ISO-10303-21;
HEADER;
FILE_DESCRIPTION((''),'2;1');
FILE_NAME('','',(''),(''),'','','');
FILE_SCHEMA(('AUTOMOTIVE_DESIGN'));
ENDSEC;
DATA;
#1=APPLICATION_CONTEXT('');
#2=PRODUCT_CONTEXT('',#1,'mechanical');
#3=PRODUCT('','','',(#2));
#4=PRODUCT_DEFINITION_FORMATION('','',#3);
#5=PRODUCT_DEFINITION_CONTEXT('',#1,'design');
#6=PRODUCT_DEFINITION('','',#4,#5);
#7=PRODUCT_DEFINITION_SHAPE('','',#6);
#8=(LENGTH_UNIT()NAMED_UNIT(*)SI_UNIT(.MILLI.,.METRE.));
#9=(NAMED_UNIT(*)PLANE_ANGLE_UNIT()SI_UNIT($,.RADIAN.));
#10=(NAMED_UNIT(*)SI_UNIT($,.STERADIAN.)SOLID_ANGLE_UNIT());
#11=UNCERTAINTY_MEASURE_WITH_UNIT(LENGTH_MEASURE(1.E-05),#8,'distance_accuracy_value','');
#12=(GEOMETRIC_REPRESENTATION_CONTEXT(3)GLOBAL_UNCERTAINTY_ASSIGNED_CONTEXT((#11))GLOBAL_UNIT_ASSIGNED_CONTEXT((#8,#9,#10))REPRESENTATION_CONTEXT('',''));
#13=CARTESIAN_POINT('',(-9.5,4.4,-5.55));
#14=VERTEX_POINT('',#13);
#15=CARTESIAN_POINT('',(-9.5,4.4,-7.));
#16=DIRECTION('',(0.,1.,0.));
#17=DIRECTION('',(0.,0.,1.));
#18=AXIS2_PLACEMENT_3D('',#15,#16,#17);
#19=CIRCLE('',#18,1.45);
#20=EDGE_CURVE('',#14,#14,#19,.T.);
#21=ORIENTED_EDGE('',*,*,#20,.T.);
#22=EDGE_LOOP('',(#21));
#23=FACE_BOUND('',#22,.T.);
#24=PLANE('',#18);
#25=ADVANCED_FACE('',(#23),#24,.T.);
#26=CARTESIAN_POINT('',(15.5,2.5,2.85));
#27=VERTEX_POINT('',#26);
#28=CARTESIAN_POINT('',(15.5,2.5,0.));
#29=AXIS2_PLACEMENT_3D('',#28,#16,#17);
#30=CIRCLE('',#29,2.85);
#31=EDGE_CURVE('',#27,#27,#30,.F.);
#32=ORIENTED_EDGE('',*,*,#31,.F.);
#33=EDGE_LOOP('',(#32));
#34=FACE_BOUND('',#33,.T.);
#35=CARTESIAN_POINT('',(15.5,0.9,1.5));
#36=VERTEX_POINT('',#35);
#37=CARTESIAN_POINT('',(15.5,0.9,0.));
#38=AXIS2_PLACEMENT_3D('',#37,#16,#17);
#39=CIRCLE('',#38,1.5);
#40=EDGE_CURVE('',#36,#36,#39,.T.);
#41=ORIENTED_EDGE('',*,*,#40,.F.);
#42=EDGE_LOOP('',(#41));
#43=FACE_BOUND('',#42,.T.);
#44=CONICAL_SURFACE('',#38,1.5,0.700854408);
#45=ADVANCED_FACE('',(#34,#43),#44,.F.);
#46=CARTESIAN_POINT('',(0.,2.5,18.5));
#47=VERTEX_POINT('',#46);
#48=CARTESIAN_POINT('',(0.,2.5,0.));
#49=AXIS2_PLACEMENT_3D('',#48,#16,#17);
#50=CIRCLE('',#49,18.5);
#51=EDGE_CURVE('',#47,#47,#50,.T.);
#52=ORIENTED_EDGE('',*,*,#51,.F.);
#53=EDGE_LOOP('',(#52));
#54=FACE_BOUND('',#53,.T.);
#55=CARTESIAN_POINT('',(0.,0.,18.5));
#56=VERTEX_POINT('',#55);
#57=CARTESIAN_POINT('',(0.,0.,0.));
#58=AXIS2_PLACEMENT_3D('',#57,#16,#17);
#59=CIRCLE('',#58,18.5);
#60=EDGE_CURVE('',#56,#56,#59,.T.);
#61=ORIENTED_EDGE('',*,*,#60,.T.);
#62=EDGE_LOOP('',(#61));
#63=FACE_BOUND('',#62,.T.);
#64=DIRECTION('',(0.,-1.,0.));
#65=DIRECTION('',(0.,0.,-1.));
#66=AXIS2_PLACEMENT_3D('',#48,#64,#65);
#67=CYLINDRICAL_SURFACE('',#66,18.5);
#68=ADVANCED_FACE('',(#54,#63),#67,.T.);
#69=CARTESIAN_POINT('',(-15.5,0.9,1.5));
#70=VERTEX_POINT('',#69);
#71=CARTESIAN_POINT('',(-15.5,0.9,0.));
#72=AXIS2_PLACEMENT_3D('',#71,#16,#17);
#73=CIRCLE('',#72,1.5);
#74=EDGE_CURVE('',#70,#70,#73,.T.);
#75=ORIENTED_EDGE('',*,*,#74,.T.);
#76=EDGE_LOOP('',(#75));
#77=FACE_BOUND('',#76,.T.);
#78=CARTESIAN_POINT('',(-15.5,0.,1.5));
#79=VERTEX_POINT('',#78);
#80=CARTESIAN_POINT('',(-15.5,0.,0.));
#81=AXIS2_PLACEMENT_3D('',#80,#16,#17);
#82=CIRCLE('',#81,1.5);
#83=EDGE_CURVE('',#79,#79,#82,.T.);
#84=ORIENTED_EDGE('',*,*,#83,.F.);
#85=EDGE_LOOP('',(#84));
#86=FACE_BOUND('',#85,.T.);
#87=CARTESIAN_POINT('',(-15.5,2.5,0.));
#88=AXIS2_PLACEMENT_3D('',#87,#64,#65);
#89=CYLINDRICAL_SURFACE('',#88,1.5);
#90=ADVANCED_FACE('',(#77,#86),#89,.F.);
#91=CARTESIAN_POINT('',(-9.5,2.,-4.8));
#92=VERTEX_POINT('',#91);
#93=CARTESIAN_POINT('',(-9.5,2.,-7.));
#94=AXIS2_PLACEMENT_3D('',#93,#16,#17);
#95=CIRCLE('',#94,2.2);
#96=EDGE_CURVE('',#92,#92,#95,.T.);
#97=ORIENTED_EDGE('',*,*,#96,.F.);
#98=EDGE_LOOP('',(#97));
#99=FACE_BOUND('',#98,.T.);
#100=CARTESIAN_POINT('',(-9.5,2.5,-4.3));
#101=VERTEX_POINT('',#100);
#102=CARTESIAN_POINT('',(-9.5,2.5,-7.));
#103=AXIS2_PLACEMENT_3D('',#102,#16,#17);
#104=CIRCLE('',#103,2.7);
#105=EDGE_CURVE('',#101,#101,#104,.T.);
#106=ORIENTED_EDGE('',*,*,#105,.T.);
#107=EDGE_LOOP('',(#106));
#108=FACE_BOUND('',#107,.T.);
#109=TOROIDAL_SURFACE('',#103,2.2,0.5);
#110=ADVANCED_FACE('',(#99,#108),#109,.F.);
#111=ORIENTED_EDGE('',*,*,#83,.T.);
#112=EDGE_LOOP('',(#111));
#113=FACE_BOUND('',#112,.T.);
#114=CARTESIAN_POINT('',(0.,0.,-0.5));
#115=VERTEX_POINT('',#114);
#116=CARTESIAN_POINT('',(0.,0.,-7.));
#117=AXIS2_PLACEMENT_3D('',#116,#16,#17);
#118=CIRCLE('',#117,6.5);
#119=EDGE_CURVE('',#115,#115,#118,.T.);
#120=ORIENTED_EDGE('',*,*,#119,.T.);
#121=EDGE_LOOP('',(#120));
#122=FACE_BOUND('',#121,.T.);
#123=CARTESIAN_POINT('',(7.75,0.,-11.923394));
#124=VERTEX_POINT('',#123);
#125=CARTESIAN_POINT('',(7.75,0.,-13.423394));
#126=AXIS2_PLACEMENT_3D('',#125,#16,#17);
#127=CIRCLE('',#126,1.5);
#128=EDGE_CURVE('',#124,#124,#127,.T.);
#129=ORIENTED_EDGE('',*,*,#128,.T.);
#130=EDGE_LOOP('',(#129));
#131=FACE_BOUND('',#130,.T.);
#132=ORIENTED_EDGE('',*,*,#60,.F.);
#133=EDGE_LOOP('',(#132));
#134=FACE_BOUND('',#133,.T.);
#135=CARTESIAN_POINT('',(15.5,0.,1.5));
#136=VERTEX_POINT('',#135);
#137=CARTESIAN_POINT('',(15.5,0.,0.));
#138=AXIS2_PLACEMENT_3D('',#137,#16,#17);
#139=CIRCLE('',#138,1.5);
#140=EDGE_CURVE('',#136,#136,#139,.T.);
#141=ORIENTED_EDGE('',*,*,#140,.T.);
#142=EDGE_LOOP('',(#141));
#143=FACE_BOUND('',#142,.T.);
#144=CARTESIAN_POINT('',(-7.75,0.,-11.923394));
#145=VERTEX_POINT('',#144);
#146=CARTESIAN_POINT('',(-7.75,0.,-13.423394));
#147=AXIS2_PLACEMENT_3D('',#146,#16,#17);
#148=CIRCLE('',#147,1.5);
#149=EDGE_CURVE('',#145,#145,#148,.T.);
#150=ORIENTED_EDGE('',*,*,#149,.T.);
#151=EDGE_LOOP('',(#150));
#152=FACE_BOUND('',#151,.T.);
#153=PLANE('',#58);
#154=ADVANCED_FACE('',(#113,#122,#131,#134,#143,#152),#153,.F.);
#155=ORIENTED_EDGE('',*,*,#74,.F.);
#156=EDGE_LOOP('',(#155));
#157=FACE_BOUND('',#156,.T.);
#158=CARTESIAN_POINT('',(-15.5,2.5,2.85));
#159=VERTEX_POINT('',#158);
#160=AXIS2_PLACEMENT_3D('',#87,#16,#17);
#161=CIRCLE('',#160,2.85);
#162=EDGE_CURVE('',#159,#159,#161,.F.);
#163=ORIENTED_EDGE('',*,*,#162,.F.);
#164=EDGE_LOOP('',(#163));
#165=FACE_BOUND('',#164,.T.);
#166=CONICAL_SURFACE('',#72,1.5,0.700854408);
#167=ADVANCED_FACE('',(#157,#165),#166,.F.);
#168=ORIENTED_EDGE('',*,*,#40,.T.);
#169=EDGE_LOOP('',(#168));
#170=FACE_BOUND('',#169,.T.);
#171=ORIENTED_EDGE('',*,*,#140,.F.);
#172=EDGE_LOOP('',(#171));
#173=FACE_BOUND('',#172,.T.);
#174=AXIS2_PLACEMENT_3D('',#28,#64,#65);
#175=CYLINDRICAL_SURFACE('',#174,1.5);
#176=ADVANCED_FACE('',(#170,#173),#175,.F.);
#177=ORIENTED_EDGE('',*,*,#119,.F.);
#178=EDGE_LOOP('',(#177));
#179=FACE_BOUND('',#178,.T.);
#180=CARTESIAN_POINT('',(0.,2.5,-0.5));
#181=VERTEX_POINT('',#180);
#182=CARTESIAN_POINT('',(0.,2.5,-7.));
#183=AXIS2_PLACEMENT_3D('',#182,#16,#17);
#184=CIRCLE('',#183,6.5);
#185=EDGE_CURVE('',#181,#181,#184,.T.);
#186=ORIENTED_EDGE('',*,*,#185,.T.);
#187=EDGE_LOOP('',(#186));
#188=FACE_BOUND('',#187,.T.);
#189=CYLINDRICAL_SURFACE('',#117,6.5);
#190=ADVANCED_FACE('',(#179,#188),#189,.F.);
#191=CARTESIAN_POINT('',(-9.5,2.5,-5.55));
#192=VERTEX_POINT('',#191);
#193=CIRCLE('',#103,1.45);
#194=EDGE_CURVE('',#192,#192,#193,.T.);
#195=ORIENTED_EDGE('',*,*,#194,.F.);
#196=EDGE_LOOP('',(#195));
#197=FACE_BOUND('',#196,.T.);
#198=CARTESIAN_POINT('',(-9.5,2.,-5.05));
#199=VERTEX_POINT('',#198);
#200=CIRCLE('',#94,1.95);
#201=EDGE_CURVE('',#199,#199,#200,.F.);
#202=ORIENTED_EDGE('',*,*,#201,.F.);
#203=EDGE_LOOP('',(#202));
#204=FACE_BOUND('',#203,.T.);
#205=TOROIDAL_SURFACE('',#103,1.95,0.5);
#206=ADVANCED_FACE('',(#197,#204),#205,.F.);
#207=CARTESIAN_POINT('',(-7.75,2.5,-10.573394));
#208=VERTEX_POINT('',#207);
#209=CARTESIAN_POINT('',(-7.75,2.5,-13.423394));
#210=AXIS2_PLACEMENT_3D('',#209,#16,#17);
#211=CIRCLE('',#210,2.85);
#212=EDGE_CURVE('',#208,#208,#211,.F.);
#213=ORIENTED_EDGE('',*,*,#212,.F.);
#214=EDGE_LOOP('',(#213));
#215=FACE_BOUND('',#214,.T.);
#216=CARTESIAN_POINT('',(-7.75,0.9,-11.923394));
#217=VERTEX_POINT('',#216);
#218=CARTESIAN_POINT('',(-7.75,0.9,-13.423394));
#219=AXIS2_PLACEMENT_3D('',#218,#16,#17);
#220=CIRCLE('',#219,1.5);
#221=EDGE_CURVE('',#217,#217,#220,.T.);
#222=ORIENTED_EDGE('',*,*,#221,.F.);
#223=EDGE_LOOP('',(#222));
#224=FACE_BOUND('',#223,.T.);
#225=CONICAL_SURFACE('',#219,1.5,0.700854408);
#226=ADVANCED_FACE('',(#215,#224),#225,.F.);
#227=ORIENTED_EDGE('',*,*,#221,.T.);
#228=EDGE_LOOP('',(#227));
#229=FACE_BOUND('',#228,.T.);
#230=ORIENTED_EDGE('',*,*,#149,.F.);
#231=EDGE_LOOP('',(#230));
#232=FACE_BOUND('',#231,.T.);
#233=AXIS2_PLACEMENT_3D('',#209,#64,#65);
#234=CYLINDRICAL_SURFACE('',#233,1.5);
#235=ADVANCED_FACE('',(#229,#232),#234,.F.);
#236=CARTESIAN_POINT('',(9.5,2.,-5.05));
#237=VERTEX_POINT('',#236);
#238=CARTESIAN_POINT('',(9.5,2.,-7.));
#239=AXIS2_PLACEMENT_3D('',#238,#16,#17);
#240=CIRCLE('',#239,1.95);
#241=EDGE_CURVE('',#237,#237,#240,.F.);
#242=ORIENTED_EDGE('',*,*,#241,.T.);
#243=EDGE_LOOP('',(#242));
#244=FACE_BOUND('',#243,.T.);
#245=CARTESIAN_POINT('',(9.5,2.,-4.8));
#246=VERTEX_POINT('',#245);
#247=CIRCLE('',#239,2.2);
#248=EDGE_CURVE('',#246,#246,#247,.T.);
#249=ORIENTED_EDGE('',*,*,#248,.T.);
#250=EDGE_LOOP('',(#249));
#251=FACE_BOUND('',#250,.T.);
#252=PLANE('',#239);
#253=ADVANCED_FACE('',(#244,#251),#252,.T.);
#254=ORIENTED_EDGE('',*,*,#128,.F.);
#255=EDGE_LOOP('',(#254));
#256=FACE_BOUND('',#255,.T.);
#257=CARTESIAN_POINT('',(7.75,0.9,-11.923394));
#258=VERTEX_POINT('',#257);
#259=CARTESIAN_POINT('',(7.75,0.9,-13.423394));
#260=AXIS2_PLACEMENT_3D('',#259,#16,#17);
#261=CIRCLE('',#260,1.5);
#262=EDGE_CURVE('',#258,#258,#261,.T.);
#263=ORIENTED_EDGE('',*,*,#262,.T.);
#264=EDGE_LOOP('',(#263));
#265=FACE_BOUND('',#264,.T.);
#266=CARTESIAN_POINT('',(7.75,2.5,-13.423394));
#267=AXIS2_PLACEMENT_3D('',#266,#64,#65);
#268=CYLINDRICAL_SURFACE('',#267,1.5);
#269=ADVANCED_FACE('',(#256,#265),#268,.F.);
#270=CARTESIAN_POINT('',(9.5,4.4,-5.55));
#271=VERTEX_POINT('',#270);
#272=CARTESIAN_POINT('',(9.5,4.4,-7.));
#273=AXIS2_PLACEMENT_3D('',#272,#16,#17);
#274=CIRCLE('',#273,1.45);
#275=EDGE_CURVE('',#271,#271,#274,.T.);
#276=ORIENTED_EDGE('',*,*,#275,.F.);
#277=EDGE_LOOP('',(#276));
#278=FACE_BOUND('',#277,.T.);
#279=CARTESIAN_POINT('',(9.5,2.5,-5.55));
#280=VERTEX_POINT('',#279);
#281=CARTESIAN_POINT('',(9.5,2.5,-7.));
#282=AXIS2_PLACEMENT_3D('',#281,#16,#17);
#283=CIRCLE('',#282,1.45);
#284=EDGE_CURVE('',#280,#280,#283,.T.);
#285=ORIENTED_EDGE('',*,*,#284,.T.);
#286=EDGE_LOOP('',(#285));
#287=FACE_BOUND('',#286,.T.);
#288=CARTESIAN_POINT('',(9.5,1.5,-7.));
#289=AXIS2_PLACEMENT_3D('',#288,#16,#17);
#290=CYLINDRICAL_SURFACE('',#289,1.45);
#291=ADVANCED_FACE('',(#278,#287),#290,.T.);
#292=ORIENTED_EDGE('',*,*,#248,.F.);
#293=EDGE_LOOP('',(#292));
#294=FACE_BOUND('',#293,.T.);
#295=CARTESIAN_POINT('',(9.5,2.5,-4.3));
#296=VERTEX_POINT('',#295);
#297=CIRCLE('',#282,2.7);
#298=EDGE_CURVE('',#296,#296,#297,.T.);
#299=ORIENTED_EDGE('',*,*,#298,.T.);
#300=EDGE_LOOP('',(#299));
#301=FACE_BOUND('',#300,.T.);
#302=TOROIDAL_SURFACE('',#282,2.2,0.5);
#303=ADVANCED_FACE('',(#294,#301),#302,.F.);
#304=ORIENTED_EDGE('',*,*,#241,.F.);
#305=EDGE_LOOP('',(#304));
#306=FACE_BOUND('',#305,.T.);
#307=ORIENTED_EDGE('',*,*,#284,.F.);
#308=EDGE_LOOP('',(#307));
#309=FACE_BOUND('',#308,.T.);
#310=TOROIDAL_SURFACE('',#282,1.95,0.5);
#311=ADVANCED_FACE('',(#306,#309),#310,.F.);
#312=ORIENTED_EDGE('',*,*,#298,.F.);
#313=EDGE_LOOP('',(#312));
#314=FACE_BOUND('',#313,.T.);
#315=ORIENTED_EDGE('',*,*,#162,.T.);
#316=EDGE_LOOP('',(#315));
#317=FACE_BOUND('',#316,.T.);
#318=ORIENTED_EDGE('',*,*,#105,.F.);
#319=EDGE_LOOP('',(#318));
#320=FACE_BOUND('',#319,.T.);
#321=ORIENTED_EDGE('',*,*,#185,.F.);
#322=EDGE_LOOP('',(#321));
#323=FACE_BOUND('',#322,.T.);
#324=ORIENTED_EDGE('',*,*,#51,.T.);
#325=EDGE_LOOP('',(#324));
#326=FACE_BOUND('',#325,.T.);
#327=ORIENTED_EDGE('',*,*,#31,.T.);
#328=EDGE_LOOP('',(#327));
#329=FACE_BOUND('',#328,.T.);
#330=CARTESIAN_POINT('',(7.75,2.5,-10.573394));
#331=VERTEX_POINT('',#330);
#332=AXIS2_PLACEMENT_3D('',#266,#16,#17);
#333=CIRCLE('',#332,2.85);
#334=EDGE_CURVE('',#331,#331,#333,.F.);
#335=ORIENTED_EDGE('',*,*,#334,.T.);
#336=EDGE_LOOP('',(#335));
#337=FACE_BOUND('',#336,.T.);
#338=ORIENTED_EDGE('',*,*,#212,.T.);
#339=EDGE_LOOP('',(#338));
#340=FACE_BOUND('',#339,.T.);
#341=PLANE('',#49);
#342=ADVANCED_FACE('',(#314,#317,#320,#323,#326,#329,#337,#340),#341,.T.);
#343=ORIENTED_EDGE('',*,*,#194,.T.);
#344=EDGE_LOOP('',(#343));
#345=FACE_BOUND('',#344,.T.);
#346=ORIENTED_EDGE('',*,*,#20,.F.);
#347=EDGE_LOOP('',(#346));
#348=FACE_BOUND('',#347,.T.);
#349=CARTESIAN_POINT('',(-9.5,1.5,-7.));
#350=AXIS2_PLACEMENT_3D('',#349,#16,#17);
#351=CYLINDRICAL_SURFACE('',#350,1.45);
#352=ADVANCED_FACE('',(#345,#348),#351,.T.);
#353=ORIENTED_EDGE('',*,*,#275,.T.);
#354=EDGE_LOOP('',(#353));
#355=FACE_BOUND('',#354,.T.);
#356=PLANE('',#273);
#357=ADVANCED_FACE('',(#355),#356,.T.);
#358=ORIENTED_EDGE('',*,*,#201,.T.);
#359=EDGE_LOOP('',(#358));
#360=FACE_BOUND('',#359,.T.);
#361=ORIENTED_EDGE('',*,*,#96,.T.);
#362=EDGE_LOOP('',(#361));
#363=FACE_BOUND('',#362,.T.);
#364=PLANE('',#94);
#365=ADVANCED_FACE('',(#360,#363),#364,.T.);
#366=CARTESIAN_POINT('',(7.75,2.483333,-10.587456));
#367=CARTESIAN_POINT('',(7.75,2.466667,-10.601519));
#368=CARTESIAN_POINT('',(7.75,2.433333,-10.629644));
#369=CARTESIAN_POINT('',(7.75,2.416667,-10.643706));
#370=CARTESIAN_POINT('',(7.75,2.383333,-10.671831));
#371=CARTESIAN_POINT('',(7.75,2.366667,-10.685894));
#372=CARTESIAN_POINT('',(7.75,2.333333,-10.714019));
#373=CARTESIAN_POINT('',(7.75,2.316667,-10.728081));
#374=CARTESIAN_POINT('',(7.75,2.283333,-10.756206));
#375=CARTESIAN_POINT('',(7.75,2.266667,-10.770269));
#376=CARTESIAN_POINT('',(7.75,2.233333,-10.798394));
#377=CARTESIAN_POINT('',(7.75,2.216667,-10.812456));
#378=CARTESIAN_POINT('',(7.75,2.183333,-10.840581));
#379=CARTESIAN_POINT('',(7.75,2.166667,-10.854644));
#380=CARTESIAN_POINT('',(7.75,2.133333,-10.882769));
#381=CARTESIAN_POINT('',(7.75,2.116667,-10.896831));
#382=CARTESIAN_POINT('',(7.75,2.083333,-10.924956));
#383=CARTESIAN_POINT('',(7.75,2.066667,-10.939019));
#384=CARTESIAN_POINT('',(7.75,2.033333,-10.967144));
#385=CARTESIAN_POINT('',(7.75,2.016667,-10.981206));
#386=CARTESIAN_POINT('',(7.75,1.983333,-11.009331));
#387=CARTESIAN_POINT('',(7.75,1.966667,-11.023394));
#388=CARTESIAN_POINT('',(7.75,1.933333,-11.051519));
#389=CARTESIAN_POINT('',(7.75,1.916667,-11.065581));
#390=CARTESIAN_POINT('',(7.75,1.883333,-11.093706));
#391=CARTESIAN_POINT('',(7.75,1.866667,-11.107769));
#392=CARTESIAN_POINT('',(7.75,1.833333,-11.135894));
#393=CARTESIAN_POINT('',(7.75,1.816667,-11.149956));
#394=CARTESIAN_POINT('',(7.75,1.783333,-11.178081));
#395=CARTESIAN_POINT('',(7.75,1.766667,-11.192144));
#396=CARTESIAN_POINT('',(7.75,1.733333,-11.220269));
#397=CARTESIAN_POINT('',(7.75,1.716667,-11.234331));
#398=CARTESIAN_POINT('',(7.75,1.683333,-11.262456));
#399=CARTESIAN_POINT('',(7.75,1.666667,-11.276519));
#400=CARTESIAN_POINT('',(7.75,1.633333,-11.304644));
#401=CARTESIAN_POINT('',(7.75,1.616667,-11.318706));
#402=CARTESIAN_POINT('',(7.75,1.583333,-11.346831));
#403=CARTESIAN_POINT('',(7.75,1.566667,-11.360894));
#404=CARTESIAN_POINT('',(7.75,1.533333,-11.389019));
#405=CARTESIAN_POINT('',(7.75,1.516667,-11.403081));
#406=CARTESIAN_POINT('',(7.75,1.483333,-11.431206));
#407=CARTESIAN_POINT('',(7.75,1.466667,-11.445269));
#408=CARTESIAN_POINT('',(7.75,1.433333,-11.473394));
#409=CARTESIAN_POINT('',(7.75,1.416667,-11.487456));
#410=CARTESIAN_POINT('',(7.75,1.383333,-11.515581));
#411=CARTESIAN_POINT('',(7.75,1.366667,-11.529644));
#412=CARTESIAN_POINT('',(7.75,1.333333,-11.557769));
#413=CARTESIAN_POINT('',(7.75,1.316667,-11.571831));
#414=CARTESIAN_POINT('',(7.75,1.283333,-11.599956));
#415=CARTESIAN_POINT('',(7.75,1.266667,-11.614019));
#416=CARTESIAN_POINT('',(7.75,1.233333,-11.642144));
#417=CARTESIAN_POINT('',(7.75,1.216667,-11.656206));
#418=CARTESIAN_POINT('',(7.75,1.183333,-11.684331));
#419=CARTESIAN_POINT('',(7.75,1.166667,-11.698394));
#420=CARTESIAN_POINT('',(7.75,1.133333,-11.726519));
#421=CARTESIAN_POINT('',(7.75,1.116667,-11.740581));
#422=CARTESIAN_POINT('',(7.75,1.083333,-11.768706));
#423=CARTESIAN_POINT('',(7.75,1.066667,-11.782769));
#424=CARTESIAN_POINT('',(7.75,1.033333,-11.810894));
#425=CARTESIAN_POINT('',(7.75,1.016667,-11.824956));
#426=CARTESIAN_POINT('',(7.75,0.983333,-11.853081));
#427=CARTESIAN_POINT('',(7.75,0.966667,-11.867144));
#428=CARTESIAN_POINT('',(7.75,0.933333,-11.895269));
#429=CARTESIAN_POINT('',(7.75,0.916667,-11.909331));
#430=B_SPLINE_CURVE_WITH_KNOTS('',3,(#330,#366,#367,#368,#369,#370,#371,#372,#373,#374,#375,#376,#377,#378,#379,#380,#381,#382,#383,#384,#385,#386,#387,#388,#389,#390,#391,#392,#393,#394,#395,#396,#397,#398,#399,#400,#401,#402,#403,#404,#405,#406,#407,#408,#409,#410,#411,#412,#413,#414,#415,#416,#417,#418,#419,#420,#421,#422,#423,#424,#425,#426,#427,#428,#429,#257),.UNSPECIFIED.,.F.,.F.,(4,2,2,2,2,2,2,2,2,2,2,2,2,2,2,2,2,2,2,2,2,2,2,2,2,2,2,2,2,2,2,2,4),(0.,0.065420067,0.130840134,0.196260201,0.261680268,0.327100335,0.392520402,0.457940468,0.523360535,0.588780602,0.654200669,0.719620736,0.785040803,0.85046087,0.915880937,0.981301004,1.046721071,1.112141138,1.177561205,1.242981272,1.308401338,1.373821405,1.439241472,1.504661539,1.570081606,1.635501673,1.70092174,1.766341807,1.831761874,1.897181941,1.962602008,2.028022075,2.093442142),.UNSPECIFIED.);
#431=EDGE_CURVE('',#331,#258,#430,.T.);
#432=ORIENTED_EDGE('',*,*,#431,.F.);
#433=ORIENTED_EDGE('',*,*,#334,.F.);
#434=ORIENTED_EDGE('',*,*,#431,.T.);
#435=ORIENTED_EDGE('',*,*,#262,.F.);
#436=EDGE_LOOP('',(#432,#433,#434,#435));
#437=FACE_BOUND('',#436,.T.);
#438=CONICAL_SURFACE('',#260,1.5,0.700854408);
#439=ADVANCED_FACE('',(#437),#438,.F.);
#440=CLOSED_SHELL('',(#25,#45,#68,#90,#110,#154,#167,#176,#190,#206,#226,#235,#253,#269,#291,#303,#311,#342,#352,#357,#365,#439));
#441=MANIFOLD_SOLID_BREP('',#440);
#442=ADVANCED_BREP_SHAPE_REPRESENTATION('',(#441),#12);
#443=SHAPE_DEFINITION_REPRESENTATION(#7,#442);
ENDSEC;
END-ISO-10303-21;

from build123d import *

# Parameters (mm, degrees)
SKETCH1_R                = 18.5
SKETCH1_R_2              = 1.5
BOSS_EXTRUDE1_DEPTH      = 2.5
BOSS_EXTRUDE2_DEPTH      = 1.9
BOSS_EXTRUDE2_DEPTH_BACK = 1
SKETCH2_R                = 1.45
CUT_EXTRUDE3_START       = -0.5
SKETCH6_R                = 2.7
SKETCH6_R_2              = 1.45
CUT_EXTRUDE3_DEPTH       = 0.5
SKETCH4_R                = 6.5
CUT_EXTRUDE1_DEPTH       = 27.282123202
CHAMFER1_SIZE            = 1.35
CHAMFER1_SIZE2           = 1.6
FILLET1_R                = 0.5


with BuildPart() as part:
    # Sketch1 → Boss-Extrude1 (new body)
    with BuildSketch(Plane(origin=(0, 0, 0), x_dir=(1, 0, 0), z_dir=(0, 1, 0))):
        with Locations(Location((0, 0, 0), (0, 0, 270))):
            Circle(SKETCH1_R)
        with Locations(Location((-7.75, 13.423393759, 0), (0, 0, 270))):
            Circle(SKETCH1_R_2, mode=Mode.SUBTRACT)
        with Locations(Location((-15.5, 0, 0), (0, 0, 270))):
            Circle(SKETCH1_R_2, mode=Mode.SUBTRACT)
        with Locations(Location((7.75, 13.423393759, 0), (0, 0, 270))):
            Circle(SKETCH1_R_2, mode=Mode.SUBTRACT)
        with Locations(Location((15.5, 0, 0), (0, 0, 270))):
            Circle(SKETCH1_R_2, mode=Mode.SUBTRACT)
    extrude(amount=BOSS_EXTRUDE1_DEPTH)

    # Sketch2 → Boss-Extrude2 (add, two sides: drawn at the far end of the back side and taken through both)
    with BuildSketch(Plane(origin=(0, 2.5, 0), x_dir=(1, 0, 0), z_dir=(0, 1, 0)).offset(-BOSS_EXTRUDE2_DEPTH_BACK)):
        with Locations(Location((-9.5, 7, 0), (0, 0, 270))):
            Circle(SKETCH2_R)
        with Locations(Location((9.5, 7, 0), (0, 0, 270))):
            Circle(SKETCH2_R)
    extrude(amount=BOSS_EXTRUDE2_DEPTH + BOSS_EXTRUDE2_DEPTH_BACK)

    # Sketch6 → Cut-Extrude3 (cut)
    # profile 1 of 2: a face of its own
    with BuildSketch(Plane(origin=(0, 2.5, 0), x_dir=(1, 0, 0), z_dir=(0, 1, 0)).offset(CUT_EXTRUDE3_START)):
        with Locations(Location((-9.5, 7, 0), (0, 0, 270))):
            Circle(SKETCH6_R)
        with Locations(Location((-9.5, 7, 0), (0, 0, 270))):
            Circle(SKETCH6_R_2, mode=Mode.SUBTRACT)
    # profile 2 of 2: a face of its own
    with BuildSketch(Plane(origin=(0, 2.5, 0), x_dir=(1, 0, 0), z_dir=(0, 1, 0)).offset(CUT_EXTRUDE3_START)):
        with Locations(Location((9.5, 7, 0), (0, 0, 270))):
            Circle(SKETCH6_R)
        with Locations(Location((9.5, 7, 0), (0, 0, 270))):
            Circle(SKETCH6_R_2, mode=Mode.SUBTRACT)
    extrude(amount=CUT_EXTRUDE3_DEPTH, mode=Mode.SUBTRACT)

    # Sketch4 → Cut-Extrude1 (cut, through all)
    with BuildSketch(Plane(origin=(0, 2.5, 0), x_dir=(1, 0, 0), z_dir=(0, 1, 0))):
        with Locations(Location((0, 7, 0), (0, 0, 270))):
            Circle(SKETCH4_R)
    extrude(amount=-CUT_EXTRUDE1_DEPTH, mode=Mode.SUBTRACT)

    # Chamfer1
    chamfer1_edges = [part.edges().sort_by_distance(p)[0] for p in [
        (7.75, 2.5, -14.923393759),
        (15.5, 2.5, -1.5),
        (-7.75, 2.5, -14.923393759),
        (-15.5, 2.5, -1.5),
    ]]
    chamfer1_side = [part.faces().sort_by_distance(p)[0] for p in [
        (0, 2.5, 1.657677708),
    ]]
    chamfer(chamfer1_edges, length=CHAMFER1_SIZE, length2=CHAMFER1_SIZE2, reference=chamfer1_side[0])

    # Fillet1
    fillet1_edges = [part.edges().sort_by_distance(p)[0] for p in [
        (-9.5, 2, -9.7),
        (-9.5, 2, -8.45),
        (9.5, 2, -9.7),
        (9.5, 2, -8.45),
    ]]
    fillet(fillet1_edges, radius=FILLET1_R - 0.0001)  # a hair under: the kernel refuses the full size


solid = part.part
